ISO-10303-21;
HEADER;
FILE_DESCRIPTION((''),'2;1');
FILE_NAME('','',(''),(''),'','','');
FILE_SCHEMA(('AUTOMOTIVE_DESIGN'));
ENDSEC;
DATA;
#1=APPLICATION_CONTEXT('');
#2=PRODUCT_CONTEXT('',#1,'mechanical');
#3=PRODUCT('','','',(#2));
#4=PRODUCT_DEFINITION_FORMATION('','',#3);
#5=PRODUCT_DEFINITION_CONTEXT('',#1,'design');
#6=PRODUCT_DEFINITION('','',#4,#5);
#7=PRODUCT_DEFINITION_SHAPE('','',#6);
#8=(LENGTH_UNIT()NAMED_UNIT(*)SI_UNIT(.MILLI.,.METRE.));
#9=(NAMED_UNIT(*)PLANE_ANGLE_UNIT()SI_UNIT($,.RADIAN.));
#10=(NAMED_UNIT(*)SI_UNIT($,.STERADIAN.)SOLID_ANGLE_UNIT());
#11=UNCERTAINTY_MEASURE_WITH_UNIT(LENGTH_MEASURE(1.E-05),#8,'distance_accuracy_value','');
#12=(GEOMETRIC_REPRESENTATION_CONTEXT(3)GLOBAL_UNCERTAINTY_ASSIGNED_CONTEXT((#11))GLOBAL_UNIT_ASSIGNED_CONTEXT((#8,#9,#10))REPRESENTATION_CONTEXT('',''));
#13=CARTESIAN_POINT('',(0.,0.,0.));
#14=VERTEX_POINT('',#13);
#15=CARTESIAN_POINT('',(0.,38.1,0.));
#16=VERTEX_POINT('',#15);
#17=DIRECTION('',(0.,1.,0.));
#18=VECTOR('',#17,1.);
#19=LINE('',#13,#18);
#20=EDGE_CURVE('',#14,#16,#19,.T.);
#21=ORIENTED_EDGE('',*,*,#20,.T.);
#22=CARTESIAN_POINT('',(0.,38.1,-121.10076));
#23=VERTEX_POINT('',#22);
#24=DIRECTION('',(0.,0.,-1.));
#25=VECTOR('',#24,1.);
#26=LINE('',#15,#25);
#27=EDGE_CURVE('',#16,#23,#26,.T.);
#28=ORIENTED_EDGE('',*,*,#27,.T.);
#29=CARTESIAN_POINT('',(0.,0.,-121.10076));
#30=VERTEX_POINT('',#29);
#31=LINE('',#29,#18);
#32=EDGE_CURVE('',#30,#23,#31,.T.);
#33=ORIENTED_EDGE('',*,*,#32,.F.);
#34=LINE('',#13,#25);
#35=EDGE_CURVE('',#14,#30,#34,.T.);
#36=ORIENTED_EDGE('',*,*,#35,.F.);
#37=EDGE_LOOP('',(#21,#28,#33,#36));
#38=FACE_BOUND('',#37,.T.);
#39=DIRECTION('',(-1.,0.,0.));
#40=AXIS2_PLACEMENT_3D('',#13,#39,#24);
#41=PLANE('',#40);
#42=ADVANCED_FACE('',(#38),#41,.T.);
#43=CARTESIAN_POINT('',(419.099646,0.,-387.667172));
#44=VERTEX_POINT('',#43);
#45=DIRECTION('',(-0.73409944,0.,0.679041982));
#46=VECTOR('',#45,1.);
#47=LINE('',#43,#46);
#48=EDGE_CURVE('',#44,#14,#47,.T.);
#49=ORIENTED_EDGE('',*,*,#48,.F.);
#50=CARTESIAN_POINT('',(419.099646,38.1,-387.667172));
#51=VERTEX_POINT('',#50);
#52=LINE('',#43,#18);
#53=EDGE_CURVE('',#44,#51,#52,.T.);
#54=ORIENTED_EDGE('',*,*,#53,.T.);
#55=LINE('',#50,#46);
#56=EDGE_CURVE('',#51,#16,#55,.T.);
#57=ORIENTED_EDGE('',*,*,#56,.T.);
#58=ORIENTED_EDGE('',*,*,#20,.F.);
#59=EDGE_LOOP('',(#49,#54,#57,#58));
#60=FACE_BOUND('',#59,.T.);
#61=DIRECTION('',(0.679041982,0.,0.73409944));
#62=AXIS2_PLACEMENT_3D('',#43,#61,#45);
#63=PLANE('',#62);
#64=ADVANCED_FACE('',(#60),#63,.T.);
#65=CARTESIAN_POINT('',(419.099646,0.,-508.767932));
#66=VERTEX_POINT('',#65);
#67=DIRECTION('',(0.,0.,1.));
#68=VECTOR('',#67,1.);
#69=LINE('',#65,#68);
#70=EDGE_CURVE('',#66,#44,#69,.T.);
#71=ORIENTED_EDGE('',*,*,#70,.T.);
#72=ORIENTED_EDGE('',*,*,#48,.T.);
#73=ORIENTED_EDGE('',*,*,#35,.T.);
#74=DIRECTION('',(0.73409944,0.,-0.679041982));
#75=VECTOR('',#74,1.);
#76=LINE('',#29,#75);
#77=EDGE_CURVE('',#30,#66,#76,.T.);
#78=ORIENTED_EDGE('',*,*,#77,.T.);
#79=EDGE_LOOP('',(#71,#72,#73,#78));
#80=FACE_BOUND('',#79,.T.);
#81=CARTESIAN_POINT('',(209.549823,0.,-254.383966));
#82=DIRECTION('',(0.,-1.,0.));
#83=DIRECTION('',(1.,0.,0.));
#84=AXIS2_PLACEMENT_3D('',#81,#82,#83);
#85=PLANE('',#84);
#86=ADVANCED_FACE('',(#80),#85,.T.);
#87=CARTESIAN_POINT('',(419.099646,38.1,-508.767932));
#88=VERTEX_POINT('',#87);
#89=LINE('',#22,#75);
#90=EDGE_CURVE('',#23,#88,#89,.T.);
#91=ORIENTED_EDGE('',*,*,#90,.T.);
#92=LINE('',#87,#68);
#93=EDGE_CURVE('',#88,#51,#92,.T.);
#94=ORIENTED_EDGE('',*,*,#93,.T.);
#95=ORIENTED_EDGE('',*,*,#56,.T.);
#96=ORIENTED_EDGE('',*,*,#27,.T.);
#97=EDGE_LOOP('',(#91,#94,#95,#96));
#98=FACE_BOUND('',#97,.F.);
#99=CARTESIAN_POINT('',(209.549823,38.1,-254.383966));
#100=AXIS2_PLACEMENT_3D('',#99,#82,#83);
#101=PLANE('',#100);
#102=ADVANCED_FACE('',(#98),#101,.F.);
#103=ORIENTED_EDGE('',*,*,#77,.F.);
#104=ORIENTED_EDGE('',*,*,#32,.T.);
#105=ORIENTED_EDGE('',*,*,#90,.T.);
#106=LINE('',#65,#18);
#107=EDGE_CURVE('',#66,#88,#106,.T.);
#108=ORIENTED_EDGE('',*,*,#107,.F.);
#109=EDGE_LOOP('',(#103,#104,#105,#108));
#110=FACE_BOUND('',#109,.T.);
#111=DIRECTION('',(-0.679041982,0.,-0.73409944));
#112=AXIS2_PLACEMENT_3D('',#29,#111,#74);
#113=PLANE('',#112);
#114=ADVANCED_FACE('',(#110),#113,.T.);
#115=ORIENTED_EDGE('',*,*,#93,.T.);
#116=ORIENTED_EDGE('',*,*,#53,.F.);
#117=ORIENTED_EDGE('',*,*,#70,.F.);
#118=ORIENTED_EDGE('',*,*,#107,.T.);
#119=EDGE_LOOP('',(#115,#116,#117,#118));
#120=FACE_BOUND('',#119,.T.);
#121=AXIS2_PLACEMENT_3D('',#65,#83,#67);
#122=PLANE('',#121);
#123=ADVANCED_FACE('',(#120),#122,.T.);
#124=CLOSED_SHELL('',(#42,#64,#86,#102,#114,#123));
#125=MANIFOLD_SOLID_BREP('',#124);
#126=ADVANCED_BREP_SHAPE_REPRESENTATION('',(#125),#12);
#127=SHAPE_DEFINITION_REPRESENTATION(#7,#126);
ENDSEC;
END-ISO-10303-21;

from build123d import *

# Parameters (mm, degrees)
F1_DEPTH = 38.1


# Not quite as in the source:
# - a feature names something its author has since deleted; it is built from what else it names


with BuildPart() as f1:
    # F0 (on Front) → F1 (new body)
    with BuildSketch(Plane.XZ):
        Polygon((419.0996457681, -387.6671723355), (0, 0), (0, -121.1007599326), (419.0996457681, -508.7679322681), align=None)
    extrude(amount=-F1_DEPTH)


solid = f1.part
